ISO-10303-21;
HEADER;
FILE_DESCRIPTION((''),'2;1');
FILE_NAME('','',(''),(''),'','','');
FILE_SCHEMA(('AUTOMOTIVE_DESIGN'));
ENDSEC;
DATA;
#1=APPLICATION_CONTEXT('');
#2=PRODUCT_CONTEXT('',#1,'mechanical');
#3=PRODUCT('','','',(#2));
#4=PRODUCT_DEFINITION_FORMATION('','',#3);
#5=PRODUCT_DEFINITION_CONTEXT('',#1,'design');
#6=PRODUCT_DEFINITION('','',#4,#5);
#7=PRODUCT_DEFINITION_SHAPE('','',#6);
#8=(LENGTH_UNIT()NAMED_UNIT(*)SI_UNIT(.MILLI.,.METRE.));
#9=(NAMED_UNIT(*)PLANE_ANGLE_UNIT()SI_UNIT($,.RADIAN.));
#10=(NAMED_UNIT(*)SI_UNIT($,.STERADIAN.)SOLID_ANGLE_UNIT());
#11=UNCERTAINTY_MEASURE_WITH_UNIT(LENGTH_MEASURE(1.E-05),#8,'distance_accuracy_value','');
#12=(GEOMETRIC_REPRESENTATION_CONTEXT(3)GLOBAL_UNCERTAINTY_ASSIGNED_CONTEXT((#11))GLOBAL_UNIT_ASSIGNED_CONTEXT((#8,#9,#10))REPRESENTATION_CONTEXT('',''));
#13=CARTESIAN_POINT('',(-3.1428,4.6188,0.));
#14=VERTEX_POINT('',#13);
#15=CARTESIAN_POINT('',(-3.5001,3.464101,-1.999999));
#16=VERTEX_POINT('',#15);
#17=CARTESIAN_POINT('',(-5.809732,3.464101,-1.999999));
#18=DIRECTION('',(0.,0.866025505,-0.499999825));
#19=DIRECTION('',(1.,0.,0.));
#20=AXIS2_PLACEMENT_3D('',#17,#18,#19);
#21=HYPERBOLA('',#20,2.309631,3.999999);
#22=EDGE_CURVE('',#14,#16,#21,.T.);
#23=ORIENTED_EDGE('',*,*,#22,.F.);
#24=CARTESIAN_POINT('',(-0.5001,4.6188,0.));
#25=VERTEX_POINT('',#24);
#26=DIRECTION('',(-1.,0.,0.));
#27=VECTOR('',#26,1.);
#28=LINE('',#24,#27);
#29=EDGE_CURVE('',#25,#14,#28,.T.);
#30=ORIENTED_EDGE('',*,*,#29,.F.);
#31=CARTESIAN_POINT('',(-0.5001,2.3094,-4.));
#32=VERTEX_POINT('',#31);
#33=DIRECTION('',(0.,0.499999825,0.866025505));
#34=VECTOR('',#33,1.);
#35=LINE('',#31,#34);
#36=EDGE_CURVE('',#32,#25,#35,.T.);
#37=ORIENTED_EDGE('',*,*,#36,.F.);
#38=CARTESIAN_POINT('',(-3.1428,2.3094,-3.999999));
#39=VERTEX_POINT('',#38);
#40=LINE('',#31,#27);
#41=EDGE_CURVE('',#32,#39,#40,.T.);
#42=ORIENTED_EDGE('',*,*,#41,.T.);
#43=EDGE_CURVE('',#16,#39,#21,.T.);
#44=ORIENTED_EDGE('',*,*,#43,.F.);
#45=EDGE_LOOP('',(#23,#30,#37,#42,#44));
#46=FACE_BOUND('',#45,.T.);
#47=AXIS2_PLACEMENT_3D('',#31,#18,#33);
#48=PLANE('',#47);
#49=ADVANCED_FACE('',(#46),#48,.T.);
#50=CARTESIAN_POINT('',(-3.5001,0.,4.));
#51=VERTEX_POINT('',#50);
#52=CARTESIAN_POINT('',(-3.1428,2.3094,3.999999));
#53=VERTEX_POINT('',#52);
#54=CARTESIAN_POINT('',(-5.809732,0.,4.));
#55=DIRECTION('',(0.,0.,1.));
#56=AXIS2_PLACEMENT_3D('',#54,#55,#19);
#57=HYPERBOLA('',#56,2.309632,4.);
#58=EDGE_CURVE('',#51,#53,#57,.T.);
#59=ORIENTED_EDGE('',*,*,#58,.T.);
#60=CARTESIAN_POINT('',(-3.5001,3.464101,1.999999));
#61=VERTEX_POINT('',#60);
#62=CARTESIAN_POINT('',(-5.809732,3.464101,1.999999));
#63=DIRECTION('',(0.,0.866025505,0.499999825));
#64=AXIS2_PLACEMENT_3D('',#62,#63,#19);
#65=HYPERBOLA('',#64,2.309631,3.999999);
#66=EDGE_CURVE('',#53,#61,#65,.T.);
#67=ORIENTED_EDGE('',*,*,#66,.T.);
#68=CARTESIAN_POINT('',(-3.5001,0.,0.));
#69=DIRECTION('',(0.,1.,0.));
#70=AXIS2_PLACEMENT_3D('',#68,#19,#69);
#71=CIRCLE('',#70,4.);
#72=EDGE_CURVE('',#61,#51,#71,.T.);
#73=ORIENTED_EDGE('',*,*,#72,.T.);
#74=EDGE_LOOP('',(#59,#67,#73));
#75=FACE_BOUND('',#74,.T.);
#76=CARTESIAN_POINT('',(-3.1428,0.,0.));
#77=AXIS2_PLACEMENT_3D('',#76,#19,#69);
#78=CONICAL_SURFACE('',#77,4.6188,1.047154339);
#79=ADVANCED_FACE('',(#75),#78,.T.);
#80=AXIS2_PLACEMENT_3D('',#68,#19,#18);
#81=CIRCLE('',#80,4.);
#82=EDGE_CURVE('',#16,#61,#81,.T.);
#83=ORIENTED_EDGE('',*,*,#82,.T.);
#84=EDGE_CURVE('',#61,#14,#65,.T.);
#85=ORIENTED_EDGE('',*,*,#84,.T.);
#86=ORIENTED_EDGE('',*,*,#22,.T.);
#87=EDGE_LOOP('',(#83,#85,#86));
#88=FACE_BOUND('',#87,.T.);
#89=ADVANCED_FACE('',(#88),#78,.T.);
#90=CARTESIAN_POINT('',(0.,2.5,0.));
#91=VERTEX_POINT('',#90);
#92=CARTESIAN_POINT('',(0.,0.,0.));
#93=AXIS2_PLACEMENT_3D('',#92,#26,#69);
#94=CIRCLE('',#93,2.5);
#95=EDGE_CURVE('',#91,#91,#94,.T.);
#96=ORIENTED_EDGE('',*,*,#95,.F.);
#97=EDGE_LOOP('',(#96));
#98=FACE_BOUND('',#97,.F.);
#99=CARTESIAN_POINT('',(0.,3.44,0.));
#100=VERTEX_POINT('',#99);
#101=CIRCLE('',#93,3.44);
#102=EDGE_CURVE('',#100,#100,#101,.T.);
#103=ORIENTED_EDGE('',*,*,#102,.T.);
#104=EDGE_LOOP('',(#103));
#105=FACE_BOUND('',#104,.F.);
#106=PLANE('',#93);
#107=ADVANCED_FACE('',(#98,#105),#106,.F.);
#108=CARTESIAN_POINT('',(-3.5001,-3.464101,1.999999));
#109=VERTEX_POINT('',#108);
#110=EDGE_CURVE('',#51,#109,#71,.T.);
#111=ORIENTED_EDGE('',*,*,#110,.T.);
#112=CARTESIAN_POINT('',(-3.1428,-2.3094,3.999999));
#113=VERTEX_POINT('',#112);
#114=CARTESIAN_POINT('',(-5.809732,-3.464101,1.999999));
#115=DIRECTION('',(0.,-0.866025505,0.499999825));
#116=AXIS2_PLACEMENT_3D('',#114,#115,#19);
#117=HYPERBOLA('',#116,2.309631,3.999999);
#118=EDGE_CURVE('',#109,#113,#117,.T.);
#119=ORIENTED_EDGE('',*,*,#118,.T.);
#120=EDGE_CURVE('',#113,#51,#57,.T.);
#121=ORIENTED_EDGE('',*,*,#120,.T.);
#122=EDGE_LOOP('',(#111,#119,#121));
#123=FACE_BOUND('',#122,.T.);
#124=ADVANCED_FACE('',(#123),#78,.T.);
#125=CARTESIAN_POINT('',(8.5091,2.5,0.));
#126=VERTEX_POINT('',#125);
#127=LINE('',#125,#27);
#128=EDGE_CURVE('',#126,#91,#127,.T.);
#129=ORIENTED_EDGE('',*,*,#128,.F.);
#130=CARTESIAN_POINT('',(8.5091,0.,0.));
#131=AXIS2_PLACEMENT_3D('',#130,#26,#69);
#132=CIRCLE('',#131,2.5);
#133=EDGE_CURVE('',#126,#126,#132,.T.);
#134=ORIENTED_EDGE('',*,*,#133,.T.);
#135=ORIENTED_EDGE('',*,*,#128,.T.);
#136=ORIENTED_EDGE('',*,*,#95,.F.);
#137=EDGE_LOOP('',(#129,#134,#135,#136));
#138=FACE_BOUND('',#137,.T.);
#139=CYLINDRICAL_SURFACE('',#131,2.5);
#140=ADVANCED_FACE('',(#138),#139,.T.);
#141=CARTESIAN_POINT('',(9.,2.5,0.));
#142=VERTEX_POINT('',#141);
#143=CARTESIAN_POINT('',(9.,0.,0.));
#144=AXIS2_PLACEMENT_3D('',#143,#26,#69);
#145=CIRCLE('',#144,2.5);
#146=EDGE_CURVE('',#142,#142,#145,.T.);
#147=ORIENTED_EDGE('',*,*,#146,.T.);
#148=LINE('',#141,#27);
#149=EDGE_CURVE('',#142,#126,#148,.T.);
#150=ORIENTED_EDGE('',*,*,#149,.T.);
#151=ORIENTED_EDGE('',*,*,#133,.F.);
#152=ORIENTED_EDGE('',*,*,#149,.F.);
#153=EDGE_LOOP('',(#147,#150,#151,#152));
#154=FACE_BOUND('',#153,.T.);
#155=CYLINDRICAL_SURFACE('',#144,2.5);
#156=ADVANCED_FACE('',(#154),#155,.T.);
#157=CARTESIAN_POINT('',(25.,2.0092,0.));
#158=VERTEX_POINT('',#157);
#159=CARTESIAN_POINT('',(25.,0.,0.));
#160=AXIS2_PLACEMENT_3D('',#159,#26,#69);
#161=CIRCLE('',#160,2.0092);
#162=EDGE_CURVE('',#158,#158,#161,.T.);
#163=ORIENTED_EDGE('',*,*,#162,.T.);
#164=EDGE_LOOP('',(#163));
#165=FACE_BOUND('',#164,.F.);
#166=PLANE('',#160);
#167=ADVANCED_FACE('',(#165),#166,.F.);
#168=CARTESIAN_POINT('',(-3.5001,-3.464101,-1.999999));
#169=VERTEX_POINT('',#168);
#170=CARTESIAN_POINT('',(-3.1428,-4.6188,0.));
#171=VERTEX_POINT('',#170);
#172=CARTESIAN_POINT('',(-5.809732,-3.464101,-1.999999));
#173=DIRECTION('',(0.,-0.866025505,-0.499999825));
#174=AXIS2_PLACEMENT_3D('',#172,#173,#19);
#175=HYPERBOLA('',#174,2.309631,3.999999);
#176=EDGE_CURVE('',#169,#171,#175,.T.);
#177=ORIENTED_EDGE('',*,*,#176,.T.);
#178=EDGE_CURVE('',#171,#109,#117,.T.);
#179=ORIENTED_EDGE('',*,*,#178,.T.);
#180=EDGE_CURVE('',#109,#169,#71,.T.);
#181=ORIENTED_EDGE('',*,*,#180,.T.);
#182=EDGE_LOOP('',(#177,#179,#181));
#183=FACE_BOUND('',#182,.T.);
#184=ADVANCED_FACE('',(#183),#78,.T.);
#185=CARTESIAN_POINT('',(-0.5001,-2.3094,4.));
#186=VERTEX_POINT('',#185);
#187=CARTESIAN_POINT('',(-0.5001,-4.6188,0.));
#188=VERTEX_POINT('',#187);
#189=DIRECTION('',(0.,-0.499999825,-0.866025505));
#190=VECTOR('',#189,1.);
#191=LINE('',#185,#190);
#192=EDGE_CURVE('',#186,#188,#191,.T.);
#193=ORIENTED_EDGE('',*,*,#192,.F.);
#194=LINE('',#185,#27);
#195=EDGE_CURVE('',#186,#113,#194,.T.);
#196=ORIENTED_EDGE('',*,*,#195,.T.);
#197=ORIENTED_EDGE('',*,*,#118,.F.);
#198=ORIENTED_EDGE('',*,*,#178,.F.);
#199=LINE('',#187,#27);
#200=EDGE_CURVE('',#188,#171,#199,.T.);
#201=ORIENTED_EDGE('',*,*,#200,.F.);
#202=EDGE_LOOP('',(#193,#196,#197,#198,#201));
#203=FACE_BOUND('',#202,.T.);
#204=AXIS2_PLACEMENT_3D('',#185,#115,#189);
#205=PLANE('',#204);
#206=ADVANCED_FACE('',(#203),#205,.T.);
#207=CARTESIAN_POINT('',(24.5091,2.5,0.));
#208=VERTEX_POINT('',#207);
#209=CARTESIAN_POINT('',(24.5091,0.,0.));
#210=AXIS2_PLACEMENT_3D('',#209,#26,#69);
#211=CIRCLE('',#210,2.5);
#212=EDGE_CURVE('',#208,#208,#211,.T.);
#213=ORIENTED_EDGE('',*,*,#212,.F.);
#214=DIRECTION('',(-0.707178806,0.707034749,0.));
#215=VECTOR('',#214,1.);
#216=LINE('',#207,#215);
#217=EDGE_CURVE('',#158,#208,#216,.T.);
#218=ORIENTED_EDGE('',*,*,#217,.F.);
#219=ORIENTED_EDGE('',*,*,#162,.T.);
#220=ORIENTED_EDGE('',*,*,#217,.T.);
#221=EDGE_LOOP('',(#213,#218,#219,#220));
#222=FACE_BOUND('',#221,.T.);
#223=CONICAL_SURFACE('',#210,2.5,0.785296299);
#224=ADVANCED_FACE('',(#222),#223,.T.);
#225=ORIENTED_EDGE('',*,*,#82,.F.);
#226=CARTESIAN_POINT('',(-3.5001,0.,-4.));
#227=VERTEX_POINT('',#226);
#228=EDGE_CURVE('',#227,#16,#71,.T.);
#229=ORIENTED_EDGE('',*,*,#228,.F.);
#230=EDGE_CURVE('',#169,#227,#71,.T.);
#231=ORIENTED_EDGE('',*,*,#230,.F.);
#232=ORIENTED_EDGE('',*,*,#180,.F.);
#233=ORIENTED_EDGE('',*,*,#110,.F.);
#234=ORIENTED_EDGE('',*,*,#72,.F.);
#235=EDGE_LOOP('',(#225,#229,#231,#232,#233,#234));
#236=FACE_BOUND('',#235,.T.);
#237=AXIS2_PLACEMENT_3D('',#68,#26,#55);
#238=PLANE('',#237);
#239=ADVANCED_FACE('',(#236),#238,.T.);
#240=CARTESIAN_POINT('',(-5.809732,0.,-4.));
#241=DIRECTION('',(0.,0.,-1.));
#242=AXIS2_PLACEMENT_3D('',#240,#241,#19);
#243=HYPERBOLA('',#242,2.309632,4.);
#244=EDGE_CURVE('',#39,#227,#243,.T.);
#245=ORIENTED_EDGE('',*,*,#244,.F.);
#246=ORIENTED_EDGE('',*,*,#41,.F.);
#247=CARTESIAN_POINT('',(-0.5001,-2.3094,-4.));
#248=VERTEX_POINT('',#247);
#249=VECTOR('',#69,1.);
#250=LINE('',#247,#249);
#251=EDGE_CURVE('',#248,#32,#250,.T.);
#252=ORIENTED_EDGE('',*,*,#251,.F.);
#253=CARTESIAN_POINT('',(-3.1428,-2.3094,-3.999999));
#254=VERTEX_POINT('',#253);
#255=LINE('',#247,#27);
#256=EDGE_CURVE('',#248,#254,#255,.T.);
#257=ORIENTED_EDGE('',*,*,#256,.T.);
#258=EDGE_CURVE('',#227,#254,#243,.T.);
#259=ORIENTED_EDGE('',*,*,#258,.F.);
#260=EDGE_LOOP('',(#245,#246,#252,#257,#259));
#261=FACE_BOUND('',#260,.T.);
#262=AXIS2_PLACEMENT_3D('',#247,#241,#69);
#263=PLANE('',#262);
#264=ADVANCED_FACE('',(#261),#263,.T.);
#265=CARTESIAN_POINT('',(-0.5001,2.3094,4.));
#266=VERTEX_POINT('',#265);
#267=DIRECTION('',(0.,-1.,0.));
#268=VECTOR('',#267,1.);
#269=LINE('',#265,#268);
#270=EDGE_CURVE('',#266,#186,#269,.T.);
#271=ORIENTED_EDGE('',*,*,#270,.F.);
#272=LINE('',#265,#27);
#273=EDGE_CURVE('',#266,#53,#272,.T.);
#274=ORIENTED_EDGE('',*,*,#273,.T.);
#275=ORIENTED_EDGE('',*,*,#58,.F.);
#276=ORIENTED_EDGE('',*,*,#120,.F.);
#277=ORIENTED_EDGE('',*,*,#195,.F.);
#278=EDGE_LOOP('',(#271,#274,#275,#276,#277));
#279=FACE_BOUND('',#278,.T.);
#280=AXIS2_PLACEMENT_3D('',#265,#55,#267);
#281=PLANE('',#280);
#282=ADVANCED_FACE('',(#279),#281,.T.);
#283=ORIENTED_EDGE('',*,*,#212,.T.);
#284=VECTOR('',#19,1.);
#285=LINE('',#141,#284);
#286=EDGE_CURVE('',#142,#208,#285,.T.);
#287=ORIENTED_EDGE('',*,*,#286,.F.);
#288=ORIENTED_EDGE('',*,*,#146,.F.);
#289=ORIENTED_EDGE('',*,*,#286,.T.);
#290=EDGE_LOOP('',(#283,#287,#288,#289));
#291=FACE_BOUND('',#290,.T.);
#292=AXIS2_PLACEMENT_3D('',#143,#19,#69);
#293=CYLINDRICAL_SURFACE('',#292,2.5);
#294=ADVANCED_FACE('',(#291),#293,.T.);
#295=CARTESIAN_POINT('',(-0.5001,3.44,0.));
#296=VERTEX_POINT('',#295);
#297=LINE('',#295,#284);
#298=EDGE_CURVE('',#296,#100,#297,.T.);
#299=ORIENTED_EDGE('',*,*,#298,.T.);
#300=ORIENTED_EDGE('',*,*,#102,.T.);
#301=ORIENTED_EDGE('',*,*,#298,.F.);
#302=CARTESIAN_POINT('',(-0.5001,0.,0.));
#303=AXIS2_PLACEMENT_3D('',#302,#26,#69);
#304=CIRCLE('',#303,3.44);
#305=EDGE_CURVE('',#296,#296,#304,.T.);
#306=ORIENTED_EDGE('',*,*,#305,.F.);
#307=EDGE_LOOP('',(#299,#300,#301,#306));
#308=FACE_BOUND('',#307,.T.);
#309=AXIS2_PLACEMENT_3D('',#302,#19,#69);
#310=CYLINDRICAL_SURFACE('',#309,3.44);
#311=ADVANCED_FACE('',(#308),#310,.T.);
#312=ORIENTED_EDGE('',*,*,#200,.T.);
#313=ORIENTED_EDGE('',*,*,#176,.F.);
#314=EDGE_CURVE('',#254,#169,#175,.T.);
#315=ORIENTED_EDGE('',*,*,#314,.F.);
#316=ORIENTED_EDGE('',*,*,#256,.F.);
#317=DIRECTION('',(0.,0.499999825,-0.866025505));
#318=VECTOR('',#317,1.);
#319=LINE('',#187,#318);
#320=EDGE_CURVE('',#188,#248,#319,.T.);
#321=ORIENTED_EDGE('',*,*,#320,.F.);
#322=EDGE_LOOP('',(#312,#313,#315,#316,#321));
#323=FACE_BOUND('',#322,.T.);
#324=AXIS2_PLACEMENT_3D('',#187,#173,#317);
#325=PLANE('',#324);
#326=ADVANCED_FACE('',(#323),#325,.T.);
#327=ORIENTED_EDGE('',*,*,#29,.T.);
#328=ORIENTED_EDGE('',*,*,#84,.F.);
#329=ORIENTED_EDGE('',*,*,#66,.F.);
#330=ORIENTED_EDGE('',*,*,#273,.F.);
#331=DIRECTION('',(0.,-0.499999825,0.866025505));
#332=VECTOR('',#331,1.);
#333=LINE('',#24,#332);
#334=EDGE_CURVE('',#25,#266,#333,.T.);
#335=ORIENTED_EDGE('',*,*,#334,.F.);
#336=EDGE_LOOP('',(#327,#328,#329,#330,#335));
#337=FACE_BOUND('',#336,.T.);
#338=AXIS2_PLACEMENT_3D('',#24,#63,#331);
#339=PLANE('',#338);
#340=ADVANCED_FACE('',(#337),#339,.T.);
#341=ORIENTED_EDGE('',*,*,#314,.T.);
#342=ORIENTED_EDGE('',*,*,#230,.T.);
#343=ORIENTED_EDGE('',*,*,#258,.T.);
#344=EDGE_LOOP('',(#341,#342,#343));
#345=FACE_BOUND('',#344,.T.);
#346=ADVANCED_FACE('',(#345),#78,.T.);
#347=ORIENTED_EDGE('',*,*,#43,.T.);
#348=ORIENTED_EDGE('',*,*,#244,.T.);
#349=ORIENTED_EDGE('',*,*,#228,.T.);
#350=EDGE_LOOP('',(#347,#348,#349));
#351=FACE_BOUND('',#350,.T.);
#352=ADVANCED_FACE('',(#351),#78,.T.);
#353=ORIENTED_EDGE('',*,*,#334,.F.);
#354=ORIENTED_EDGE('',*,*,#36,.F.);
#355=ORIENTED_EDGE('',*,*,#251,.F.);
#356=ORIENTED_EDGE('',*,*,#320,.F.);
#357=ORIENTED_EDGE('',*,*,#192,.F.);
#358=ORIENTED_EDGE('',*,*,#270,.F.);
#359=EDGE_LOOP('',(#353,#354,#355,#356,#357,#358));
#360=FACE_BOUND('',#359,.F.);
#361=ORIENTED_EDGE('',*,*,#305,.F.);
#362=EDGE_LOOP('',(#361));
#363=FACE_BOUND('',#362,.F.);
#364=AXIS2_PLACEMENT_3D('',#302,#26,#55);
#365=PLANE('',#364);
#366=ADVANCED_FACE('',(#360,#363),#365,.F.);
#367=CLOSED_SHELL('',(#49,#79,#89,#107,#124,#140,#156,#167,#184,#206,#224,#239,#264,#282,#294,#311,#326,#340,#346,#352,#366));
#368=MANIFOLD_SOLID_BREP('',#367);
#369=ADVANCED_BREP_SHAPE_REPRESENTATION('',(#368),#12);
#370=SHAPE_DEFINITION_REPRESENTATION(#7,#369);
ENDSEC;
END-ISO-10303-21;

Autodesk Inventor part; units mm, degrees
ref_plane "YZ Plane" through (0, 0, 0) normal (1, 0, 0) x (0, 1, 0)
ref_plane "XZ Plane" through (0, 0, 0) normal (0, 1, 0) x (-1, 0, 0)
sketch "Sketch1" plane through (0, 0, 0) normal (0, 0, 1) x (1, 0, 0)
  line L0 (0, 3.44) -> (0, 2.5)
  line L1 (9, 2.5) -> (25, 2.5)
  line L2 (25, 2.5) -> (25, 0)
  line L3 (25, 0) -> (-0.5001, 0)
  line L4 (-5.6001, 0) -> (30.1, 0) projected
  line L5 (-0.5001, 0) -> (-0.5001, 3.44)
  line L6 (-0.5001, 3.44) -> (0, 3.44)
  line L7 (9, 2.5) -> (8.5091, 2.5)
  line L8 (8.5091, 2.5) -> (0, 2.5)
  line L9 (0, -0.688) -> (0, 4.128) projected
  dimension "d0" = 25
  dimension "d1" = 16
  dimension "d2" = 5
  dimension "d9" = 0.5001
  dimension "d10" = 6.88
  dimension "d13" = 0.4909
  dimension "d14" = 5
revolve "Body" add sketch "Sketch1" angle 360 about axis through (25, 0, 0) along (-1, 0, 0)
sketch "Sketch2" plane through (-0.5001, 0, 0) normal (-1, 0, 0) x (0, 0, 1)
  line L0 (0, 4.6188) -> (4, 2.3094)
  line L1 (4, 2.3094) -> (4, -2.3094)
  line L2 (4, -2.3094) -> (0, -4.6188)
  line L3 (0, -4.6188) -> (-4, -2.3094)
  line L4 (-4, -2.3094) -> (-4, 2.3094)
  line L5 (-4, 2.3094) -> (0, 4.6188)
  point P0 (0, 0)
  point P1 (0, 0)
  dimension "d11" = 8
extrude "Head" add sketch "Sketch2" along normal blind 3
sketch "Sketch4" plane through (0, 0, 0) normal (0, 0, 1) x (1, 0, 0)
  line L0 (-3.5001, 4) -> (-3.5001, 4.6188)
  line L1 (-3.5001, 4.6188) -> (-3.1428, 4.6188)
  line L2 (-3.1428, 4.6188) -> (-3.5001, 4)
  line L3 (-4.1001, 0) -> (0.0999, 0) projected
  line L4 (-0.5001, 4.6188) -> (-3.5001, 4.6188) projected
  line L5 (-3.5001, 2.3094) -> (-3.5001, 4.6188) projected
  dimension "d5" = 30
  dimension "d19" = 8
revolve "Chamfer1" cut sketch "Sketch4" angle 360 about axis through (-10, 0, 0) along (1, 0, 0)
thread "Thread" size "M5x0.8" class "6g" standard "ISO Metric profile" length 16
chamfer "Chamfer2" distance 0.4908 distance2 0.4909 1 edges at (25, -2.5, 0) measured on face at (25, 0.7379, -0.3873)
ref_plane "Work Plane1" through (1.525, 0, 0) normal (0, 0, 1) x (1, 0, 0)
equation "\"d11\" = SW"
equation "\"d3\" = KOH - SD"
equation "\"d15\" = GEL"
equation "\"d6\" = -0.5 * SPD + 0.5 * GD"
equation "\"d0\" = NLG"
equation "\"d1\" = GEL"
equation "\"d2\" = GD"
equation "\"d10\" = SD2"
equation "\"d14\" = BDM"
equation "\"d5\" = ANG1"
equation "\"d19\" = SW0"
equation "\"NLG\" = 25"
equation "\"GD\" = NND"
equation "\"BDM\" = NND"
equation "\"KOH\" = 3.5"
equation "\"GEL\" = 16"
equation "\"SW\" = 8"
equation "\"SW0\" = SW"
equation "\"SPD\" = NND - 1.2269 * PTC"
equation "\"SD2\" = 6.88"
equation "\"SD\" = 0.5"
equation "\"ANG1\" = 30deg"
equation "\"GAL\" = 0.61345 * PTC"
equation "\"GUL\" = 0.61345 * PTC"
equation "\"RR\" = 0.2"
equation "\"GD1\" = THREADDIA - 1.2269 * PTC"
equation "\"THREADDIA\" = 5"
equation "\"SDH\" = SD2"
equation "\"TOA\" = 30deg"
equation "\"PTC\" = 0.8"
equation "\"NND\" = 5"
equation "\"E0\" = 1.155 * SW"
properties part number "ISO 4014 - M5 x 25" material "Stainless Steel, 440C"
